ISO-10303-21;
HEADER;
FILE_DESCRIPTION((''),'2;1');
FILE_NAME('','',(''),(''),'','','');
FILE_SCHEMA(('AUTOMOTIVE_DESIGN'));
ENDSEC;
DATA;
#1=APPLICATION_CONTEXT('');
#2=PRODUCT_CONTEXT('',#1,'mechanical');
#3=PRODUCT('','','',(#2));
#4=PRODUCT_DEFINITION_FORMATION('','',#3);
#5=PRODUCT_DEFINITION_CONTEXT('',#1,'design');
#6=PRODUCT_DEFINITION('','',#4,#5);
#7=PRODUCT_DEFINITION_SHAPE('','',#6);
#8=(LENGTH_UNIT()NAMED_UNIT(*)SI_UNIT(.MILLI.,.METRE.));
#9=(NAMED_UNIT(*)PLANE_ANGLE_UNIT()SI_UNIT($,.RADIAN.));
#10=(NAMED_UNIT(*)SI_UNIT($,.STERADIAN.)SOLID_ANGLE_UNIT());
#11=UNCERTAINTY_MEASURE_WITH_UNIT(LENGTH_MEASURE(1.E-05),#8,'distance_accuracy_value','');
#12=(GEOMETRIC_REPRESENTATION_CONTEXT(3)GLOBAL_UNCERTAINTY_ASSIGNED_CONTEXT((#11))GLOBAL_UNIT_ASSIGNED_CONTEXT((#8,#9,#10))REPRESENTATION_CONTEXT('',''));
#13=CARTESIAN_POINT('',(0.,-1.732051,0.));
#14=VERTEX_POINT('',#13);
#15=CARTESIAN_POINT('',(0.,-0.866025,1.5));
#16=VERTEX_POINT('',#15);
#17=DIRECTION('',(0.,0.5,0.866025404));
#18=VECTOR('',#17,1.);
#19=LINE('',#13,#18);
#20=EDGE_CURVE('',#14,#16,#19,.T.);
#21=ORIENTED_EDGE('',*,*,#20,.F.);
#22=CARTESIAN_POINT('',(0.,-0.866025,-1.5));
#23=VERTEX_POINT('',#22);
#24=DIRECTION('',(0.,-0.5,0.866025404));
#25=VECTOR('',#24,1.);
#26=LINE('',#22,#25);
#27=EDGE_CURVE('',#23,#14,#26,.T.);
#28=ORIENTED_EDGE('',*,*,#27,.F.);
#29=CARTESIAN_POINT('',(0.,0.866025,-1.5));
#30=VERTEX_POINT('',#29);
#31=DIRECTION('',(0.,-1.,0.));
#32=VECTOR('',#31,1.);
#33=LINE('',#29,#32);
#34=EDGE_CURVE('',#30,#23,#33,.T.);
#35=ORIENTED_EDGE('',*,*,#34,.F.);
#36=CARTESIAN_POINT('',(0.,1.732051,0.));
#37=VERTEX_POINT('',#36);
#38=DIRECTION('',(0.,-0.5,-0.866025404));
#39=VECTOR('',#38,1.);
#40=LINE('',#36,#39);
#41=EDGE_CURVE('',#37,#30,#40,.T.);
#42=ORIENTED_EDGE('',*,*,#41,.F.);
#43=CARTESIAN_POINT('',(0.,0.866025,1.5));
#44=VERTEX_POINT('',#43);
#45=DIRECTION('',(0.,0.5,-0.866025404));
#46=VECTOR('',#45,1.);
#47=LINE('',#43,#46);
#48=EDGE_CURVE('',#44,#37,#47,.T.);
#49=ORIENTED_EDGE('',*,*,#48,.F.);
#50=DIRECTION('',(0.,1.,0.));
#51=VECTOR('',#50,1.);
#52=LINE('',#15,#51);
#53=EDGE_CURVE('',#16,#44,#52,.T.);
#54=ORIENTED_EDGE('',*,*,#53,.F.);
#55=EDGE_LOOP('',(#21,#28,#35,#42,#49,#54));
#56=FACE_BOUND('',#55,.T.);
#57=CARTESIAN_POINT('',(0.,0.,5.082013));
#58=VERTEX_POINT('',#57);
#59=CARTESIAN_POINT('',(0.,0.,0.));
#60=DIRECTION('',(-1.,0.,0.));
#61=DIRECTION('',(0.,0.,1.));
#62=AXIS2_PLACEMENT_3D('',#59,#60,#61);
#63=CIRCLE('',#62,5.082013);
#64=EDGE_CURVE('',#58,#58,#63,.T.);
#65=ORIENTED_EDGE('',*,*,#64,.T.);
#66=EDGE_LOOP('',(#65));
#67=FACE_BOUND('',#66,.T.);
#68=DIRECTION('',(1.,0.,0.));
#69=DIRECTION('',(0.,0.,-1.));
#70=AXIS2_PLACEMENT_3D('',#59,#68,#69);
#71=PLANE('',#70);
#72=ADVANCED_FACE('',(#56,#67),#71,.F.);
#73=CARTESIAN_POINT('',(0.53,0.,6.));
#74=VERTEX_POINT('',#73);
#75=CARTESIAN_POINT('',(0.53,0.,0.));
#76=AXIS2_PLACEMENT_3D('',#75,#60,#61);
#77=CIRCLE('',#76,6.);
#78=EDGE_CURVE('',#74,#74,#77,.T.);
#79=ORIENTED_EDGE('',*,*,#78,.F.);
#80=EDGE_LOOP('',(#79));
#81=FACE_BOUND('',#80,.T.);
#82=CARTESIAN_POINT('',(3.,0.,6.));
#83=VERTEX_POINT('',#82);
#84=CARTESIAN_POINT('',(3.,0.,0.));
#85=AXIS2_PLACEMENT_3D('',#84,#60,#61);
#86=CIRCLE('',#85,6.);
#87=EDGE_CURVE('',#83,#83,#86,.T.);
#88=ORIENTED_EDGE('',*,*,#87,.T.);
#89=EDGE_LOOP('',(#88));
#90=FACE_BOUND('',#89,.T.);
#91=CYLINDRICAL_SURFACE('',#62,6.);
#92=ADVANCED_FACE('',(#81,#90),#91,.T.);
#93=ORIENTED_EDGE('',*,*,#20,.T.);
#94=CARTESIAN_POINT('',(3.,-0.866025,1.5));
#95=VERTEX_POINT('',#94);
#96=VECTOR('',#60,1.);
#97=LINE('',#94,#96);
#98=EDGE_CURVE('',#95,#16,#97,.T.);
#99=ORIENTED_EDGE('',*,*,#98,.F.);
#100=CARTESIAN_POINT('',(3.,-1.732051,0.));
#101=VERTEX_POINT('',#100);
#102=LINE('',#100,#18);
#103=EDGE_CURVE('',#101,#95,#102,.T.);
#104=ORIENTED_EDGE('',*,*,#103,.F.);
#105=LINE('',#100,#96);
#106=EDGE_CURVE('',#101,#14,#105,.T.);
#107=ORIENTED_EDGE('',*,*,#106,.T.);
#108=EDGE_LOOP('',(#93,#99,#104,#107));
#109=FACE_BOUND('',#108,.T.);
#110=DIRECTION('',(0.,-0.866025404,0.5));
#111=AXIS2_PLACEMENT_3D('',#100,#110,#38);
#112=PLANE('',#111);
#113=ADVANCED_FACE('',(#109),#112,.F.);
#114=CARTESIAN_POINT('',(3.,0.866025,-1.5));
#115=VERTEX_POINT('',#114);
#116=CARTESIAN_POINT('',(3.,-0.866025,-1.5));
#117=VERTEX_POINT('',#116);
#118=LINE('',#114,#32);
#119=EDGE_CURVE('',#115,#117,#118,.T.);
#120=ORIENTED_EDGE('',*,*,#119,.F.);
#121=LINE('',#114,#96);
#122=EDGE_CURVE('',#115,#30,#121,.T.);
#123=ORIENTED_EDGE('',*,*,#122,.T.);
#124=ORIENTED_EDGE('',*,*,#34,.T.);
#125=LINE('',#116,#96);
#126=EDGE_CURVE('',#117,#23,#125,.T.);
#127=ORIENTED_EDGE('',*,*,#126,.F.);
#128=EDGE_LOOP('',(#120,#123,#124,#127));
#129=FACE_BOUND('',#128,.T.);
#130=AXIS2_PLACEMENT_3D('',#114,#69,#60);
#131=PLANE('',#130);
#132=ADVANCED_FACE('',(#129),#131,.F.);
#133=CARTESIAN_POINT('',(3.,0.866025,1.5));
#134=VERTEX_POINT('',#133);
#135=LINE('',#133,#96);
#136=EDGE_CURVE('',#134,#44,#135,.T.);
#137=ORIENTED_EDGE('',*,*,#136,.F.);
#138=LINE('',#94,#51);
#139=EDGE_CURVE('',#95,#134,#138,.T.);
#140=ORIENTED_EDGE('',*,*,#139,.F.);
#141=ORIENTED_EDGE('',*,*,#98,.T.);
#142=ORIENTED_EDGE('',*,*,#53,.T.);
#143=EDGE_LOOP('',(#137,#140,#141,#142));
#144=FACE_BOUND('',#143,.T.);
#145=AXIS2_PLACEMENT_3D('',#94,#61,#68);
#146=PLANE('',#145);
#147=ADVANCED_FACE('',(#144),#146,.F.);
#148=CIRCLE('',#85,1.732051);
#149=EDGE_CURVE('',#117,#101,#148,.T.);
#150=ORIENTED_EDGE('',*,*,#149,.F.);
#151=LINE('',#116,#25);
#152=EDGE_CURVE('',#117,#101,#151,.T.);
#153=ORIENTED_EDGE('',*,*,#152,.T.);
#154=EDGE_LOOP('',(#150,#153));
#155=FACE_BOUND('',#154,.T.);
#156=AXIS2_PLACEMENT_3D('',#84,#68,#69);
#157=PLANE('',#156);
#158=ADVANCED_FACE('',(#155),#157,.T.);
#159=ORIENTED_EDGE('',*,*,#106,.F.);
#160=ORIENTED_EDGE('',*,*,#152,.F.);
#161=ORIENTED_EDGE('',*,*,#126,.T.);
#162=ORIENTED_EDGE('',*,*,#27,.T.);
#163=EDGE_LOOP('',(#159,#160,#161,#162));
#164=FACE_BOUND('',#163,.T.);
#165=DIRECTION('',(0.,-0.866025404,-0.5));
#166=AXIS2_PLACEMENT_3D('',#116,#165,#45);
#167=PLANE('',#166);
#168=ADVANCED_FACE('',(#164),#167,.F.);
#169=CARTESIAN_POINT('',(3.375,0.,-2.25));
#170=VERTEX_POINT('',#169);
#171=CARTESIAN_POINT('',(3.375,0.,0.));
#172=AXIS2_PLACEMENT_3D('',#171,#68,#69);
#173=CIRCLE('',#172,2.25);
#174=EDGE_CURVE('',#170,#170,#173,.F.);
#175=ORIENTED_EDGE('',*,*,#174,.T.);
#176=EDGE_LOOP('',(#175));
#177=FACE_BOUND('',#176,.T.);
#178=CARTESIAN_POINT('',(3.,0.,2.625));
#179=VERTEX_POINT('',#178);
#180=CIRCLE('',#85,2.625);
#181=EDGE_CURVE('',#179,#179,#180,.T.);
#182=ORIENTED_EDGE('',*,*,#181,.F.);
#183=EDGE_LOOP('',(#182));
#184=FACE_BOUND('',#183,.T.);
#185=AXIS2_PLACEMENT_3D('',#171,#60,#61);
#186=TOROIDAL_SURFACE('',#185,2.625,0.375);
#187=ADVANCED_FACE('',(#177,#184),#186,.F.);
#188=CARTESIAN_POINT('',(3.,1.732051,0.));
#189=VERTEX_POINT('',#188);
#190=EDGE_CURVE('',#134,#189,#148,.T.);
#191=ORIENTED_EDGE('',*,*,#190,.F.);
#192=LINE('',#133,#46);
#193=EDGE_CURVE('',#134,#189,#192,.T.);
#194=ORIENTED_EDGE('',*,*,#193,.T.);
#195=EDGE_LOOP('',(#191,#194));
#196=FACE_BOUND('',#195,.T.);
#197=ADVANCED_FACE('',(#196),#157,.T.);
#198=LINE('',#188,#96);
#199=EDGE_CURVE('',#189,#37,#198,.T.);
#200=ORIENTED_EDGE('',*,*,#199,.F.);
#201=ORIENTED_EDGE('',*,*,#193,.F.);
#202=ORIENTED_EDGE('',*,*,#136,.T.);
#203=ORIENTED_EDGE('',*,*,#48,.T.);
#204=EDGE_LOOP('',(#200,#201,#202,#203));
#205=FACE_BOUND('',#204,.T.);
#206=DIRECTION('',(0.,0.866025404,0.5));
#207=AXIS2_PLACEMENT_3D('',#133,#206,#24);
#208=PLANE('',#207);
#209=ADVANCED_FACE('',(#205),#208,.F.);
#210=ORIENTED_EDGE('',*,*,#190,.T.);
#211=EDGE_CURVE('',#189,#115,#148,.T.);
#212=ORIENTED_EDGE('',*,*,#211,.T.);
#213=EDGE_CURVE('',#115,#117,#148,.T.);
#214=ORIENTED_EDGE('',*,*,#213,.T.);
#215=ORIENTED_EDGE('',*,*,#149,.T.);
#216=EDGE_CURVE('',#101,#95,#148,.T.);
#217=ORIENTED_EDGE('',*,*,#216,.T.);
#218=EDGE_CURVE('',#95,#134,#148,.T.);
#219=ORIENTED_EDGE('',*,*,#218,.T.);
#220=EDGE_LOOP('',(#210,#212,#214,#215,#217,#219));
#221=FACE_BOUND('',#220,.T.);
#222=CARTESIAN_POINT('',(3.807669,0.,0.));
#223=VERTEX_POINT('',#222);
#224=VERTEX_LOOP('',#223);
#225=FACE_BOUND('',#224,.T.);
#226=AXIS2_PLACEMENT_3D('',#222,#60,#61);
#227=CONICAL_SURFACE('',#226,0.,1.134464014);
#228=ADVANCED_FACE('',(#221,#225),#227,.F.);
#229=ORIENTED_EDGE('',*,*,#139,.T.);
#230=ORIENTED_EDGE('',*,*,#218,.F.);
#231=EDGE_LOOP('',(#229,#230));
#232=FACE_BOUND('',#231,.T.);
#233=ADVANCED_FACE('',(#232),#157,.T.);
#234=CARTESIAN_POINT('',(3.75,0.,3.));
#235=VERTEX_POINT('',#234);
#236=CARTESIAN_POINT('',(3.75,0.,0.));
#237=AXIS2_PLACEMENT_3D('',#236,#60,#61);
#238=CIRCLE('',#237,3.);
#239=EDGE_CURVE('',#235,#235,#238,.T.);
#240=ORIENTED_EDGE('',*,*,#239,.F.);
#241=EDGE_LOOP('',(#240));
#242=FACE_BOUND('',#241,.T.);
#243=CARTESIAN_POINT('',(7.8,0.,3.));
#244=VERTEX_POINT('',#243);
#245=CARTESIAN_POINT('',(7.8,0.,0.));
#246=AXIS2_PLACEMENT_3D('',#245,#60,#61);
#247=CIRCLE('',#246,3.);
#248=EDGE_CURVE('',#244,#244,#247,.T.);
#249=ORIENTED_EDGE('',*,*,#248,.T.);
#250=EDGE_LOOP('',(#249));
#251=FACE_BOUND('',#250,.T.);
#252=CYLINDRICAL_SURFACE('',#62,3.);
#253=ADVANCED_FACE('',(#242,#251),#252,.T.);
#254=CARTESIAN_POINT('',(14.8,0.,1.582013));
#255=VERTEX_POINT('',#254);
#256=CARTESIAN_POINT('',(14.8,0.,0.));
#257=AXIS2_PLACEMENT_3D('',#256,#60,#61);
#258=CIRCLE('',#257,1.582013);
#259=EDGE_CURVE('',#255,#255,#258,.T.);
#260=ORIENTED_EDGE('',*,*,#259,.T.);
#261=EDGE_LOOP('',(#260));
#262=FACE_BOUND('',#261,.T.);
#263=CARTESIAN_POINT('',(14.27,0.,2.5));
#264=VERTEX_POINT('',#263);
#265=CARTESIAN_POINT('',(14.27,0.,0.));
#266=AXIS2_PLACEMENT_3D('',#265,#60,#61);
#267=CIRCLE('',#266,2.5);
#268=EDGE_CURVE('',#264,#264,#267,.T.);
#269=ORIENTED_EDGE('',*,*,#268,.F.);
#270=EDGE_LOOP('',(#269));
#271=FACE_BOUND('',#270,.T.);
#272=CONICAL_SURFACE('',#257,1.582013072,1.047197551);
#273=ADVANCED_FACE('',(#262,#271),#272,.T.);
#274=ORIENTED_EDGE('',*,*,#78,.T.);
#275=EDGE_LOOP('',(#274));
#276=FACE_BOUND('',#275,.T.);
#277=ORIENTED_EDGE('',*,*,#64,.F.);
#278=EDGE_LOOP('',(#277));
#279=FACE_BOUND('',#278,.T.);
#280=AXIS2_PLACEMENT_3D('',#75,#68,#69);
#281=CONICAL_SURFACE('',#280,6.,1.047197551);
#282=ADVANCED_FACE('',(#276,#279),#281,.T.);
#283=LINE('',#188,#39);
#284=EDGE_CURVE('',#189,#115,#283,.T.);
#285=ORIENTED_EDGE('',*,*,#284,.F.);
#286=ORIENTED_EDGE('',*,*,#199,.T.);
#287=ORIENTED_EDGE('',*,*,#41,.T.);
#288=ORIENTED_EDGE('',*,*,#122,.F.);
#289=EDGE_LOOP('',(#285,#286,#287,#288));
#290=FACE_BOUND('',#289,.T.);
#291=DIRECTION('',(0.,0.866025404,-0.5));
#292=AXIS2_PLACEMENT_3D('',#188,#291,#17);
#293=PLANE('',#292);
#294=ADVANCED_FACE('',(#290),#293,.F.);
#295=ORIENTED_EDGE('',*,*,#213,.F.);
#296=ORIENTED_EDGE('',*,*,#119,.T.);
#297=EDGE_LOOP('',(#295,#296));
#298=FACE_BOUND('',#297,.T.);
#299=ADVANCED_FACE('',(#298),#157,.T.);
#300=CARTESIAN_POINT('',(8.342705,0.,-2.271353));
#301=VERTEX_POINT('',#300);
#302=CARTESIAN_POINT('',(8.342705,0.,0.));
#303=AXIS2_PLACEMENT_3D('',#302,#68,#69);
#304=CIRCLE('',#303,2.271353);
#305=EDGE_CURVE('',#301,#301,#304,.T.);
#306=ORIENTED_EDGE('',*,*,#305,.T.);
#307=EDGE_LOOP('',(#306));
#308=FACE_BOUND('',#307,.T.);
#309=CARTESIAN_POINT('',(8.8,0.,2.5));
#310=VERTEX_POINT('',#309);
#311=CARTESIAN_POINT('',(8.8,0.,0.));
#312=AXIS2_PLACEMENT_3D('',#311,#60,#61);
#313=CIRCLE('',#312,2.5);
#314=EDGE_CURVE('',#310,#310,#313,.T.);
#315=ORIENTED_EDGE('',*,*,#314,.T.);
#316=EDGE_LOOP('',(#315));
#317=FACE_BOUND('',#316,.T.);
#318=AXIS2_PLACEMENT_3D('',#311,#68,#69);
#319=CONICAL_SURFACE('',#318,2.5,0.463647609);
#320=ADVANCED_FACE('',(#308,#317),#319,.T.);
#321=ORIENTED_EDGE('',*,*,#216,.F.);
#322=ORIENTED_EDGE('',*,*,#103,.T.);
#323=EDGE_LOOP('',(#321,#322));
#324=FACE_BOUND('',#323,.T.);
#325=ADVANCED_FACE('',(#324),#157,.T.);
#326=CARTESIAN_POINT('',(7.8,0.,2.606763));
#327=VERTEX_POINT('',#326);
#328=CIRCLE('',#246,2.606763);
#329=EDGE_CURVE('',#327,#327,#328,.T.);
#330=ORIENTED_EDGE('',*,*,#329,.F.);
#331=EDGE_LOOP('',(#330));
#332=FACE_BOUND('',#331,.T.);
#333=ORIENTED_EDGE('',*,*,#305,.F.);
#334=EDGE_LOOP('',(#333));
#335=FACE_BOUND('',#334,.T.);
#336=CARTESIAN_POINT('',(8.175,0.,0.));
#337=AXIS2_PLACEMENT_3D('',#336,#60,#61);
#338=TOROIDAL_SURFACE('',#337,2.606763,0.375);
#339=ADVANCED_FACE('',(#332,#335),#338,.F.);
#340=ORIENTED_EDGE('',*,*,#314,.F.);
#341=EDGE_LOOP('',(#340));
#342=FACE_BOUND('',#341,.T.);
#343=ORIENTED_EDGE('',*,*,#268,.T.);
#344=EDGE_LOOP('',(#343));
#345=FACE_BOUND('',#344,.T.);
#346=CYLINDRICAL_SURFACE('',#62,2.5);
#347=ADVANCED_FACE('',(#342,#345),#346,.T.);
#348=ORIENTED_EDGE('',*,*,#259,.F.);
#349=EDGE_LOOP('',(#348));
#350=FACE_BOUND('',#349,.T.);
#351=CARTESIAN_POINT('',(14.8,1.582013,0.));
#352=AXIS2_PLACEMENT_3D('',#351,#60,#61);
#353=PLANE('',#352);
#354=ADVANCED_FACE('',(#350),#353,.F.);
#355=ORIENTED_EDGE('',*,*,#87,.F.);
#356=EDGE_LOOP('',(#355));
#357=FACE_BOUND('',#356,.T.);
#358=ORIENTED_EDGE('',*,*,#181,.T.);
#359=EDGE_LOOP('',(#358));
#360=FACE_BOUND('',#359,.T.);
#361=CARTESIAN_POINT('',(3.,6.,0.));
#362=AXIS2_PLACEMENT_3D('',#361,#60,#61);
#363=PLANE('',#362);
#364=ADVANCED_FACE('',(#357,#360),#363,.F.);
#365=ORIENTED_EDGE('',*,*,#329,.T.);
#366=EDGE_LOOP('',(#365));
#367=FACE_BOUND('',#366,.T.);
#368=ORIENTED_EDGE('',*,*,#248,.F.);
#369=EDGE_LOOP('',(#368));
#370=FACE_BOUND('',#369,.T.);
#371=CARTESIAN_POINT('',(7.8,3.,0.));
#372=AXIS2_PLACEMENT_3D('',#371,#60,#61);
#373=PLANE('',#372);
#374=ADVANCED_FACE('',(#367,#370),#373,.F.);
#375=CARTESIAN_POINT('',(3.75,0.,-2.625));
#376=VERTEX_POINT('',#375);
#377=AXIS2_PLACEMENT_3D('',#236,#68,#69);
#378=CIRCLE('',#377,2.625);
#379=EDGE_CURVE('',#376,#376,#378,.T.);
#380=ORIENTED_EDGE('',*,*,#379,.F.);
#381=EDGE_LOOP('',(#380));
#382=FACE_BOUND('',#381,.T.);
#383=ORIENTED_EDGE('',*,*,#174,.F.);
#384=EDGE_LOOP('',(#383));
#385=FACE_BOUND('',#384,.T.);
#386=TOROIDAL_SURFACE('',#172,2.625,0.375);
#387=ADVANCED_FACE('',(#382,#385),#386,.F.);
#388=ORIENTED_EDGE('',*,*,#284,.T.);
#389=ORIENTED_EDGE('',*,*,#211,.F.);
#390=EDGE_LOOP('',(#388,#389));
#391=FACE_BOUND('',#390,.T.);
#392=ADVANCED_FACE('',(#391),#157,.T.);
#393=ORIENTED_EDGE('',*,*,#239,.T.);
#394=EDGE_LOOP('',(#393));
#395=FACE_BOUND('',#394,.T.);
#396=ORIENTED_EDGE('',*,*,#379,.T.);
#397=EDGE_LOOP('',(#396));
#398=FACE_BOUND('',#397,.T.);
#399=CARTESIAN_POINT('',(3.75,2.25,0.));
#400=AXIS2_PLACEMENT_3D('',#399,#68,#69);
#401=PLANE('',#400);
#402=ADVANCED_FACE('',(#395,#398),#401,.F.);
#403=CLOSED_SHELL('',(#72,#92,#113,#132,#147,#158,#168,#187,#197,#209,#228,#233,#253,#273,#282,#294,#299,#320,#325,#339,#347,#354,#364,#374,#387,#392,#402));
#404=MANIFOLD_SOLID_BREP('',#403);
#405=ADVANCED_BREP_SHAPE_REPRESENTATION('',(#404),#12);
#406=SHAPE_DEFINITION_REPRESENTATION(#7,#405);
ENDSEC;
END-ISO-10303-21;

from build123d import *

# Parameters (mm, degrees)
WYTNIJ_WYCI_GNI_CIE1_DEPTH = 3
ZAOKR_GLENIE2_R            = 0.375


with BuildPart() as part:
    # Szkic1 → Obrót1 (revolve)
    with BuildSketch(Plane.XY, mode=Mode.PRIVATE) as obr_t1_sk:
        Polygon((0, 0), (0, 5.082013072), (0.53, 6), (3, 6), (3, 2.25), (3.75, 2.25), (3.75, 3), (7.8, 3), (7.8, 2), (8.8, 2.5), (14.27, 2.5), (14.8, 1.582013072), (14.8, 0), align=None)
    revolve(obr_t1_sk.sketch.rotate(Axis((0, 0, 0), (1, 0, 0)), 90), axis=Axis((0, 0, 0), (1, 0, 0)))

    # Szkic2 → Wytnij-wyciągnięcie1 (cut)
    with BuildSketch(Plane.ZY):
        Polygon((0, -1.732050808), (1.5, -0.866025404), (1.5, 0.866025404), (0, 1.732050808), (-1.5, 0.866025404), (-1.5, -0.866025404), align=None)
    extrude(amount=-WYTNIJ_WYCI_GNI_CIE1_DEPTH, mode=Mode.SUBTRACT)

    # Szkic3 → Wycięcie-obrót1 (revolve, cut)
    with BuildSketch(Plane.XY, mode=Mode.PRIVATE) as wyci_cie_obr_t1_sk:
        Polygon((3, 0), (3, 1.732050808), (3.807668556, 0), align=None)
    revolve(wyci_cie_obr_t1_sk.sketch.rotate(Axis((-0.90277096, 0, 0), (1, 0, 0)), 90), axis=Axis((-0.90277096, 0, 0), (1, 0, 0)), mode=Mode.SUBTRACT)

    # Zaokrąglenie2
    zaokr_glenie2_edges = [part.edges().sort_by_distance(p)[0] for p in [
        (7.8, 0, -2),
        (3.75, 0, -2.25),
        (3, 0, -2.25),
    ]]
    fillet(zaokr_glenie2_edges, radius=ZAOKR_GLENIE2_R - 0.0001)  # a hair under: the kernel refuses the full size


solid = part.part
